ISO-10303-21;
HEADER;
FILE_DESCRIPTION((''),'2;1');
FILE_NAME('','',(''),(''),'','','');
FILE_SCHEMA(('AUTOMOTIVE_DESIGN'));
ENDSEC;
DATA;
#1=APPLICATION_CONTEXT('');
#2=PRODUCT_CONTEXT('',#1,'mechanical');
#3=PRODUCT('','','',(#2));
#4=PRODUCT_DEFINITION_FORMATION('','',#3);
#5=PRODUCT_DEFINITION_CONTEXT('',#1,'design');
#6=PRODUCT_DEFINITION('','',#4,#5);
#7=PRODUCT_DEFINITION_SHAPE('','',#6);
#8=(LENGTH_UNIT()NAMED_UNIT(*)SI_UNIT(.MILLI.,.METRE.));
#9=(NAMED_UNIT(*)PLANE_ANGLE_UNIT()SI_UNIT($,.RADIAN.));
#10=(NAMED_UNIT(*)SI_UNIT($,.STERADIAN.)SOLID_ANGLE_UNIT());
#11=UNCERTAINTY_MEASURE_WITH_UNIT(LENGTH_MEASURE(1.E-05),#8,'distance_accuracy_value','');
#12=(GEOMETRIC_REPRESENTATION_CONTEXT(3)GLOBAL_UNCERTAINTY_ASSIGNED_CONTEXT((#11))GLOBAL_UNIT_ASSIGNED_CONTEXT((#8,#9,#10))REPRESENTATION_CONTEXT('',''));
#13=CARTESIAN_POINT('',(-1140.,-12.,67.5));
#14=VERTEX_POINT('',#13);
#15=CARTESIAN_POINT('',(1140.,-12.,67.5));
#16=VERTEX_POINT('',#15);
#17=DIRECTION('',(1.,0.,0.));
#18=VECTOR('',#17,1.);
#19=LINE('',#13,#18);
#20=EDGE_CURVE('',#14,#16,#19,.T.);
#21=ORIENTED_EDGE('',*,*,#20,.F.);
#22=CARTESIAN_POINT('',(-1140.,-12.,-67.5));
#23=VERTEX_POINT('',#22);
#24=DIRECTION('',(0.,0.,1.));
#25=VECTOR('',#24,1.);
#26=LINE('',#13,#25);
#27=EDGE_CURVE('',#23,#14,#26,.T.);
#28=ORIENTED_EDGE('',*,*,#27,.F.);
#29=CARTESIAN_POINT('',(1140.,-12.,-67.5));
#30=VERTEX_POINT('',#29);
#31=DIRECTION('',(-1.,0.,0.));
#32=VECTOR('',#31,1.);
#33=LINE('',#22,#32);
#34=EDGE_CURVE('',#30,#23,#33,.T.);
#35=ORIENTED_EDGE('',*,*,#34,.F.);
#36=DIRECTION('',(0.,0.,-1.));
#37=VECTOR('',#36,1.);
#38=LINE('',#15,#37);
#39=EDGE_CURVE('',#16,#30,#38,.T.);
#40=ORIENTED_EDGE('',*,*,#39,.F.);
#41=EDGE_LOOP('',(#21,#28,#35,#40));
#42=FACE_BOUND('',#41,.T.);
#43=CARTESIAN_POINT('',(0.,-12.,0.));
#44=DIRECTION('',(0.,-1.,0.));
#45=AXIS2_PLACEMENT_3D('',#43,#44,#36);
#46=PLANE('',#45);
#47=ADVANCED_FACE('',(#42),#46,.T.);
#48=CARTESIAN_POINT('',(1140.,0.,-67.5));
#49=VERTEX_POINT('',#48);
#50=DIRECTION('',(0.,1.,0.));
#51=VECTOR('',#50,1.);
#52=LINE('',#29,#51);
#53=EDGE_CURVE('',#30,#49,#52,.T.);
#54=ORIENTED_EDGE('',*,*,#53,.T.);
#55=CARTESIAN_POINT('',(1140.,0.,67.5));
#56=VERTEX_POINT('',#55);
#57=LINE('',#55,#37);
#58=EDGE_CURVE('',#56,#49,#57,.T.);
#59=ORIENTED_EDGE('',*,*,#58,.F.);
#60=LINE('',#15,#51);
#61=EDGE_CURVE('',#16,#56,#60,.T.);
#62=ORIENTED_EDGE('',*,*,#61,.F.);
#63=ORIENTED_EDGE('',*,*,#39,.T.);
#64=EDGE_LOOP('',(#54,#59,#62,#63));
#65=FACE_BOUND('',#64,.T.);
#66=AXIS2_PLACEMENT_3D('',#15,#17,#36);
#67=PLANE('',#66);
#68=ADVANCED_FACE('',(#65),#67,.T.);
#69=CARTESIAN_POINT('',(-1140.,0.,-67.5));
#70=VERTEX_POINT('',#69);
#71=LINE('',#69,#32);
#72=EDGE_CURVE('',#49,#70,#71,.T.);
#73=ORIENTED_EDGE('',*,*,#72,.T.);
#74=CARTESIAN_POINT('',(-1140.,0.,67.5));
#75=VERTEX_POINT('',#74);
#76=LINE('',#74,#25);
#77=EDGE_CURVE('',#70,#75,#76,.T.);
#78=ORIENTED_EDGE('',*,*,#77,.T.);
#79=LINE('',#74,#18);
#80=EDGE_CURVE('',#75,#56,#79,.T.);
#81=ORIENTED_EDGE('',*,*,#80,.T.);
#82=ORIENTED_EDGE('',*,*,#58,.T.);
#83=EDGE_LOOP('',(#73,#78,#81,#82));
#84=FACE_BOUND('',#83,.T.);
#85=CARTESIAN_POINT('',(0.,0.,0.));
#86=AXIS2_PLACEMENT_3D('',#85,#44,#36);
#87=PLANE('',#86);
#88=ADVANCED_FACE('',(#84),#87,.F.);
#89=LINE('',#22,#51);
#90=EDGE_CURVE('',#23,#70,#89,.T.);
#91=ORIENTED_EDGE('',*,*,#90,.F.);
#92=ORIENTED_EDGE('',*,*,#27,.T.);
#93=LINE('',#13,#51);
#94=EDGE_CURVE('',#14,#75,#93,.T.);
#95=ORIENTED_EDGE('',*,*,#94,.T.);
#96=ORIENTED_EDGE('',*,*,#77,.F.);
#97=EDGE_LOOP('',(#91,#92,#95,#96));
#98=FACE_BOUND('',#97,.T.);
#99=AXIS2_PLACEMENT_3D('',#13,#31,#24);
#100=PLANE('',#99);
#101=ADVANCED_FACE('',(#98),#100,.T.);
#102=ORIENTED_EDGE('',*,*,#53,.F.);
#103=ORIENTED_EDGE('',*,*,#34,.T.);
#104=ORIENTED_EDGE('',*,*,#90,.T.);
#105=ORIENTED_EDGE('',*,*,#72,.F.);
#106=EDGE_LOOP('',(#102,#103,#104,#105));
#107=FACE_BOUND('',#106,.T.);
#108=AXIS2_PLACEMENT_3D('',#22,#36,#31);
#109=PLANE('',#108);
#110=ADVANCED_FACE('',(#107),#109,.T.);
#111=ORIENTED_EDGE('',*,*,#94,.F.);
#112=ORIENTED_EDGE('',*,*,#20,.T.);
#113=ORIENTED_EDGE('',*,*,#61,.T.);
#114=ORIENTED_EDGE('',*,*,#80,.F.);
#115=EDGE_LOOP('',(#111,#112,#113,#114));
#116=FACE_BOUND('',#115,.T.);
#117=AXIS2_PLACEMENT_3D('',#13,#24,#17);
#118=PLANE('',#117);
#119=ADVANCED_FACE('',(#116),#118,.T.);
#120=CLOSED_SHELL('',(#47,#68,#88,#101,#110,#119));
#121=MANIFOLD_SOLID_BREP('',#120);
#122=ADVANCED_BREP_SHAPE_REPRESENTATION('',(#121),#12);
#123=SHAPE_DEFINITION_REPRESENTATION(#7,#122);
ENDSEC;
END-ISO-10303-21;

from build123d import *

# Parameters (mm, degrees)
SKETCH1_W          = 2280
SKETCH1_H          = 135
BASE_FLANGE1_DEPTH = 12


# Sheet-metal steps are written as plain solids
with BuildPart() as part:
    # Sketch1 → Base-Flange1 (new body)
    with BuildSketch(Plane(origin=(0, 0, 0), x_dir=(1, 0, 0), z_dir=(0, 1, 0))):
        Rectangle(SKETCH1_W, SKETCH1_H)
    extrude(amount=-BASE_FLANGE1_DEPTH)


solid = part.part
